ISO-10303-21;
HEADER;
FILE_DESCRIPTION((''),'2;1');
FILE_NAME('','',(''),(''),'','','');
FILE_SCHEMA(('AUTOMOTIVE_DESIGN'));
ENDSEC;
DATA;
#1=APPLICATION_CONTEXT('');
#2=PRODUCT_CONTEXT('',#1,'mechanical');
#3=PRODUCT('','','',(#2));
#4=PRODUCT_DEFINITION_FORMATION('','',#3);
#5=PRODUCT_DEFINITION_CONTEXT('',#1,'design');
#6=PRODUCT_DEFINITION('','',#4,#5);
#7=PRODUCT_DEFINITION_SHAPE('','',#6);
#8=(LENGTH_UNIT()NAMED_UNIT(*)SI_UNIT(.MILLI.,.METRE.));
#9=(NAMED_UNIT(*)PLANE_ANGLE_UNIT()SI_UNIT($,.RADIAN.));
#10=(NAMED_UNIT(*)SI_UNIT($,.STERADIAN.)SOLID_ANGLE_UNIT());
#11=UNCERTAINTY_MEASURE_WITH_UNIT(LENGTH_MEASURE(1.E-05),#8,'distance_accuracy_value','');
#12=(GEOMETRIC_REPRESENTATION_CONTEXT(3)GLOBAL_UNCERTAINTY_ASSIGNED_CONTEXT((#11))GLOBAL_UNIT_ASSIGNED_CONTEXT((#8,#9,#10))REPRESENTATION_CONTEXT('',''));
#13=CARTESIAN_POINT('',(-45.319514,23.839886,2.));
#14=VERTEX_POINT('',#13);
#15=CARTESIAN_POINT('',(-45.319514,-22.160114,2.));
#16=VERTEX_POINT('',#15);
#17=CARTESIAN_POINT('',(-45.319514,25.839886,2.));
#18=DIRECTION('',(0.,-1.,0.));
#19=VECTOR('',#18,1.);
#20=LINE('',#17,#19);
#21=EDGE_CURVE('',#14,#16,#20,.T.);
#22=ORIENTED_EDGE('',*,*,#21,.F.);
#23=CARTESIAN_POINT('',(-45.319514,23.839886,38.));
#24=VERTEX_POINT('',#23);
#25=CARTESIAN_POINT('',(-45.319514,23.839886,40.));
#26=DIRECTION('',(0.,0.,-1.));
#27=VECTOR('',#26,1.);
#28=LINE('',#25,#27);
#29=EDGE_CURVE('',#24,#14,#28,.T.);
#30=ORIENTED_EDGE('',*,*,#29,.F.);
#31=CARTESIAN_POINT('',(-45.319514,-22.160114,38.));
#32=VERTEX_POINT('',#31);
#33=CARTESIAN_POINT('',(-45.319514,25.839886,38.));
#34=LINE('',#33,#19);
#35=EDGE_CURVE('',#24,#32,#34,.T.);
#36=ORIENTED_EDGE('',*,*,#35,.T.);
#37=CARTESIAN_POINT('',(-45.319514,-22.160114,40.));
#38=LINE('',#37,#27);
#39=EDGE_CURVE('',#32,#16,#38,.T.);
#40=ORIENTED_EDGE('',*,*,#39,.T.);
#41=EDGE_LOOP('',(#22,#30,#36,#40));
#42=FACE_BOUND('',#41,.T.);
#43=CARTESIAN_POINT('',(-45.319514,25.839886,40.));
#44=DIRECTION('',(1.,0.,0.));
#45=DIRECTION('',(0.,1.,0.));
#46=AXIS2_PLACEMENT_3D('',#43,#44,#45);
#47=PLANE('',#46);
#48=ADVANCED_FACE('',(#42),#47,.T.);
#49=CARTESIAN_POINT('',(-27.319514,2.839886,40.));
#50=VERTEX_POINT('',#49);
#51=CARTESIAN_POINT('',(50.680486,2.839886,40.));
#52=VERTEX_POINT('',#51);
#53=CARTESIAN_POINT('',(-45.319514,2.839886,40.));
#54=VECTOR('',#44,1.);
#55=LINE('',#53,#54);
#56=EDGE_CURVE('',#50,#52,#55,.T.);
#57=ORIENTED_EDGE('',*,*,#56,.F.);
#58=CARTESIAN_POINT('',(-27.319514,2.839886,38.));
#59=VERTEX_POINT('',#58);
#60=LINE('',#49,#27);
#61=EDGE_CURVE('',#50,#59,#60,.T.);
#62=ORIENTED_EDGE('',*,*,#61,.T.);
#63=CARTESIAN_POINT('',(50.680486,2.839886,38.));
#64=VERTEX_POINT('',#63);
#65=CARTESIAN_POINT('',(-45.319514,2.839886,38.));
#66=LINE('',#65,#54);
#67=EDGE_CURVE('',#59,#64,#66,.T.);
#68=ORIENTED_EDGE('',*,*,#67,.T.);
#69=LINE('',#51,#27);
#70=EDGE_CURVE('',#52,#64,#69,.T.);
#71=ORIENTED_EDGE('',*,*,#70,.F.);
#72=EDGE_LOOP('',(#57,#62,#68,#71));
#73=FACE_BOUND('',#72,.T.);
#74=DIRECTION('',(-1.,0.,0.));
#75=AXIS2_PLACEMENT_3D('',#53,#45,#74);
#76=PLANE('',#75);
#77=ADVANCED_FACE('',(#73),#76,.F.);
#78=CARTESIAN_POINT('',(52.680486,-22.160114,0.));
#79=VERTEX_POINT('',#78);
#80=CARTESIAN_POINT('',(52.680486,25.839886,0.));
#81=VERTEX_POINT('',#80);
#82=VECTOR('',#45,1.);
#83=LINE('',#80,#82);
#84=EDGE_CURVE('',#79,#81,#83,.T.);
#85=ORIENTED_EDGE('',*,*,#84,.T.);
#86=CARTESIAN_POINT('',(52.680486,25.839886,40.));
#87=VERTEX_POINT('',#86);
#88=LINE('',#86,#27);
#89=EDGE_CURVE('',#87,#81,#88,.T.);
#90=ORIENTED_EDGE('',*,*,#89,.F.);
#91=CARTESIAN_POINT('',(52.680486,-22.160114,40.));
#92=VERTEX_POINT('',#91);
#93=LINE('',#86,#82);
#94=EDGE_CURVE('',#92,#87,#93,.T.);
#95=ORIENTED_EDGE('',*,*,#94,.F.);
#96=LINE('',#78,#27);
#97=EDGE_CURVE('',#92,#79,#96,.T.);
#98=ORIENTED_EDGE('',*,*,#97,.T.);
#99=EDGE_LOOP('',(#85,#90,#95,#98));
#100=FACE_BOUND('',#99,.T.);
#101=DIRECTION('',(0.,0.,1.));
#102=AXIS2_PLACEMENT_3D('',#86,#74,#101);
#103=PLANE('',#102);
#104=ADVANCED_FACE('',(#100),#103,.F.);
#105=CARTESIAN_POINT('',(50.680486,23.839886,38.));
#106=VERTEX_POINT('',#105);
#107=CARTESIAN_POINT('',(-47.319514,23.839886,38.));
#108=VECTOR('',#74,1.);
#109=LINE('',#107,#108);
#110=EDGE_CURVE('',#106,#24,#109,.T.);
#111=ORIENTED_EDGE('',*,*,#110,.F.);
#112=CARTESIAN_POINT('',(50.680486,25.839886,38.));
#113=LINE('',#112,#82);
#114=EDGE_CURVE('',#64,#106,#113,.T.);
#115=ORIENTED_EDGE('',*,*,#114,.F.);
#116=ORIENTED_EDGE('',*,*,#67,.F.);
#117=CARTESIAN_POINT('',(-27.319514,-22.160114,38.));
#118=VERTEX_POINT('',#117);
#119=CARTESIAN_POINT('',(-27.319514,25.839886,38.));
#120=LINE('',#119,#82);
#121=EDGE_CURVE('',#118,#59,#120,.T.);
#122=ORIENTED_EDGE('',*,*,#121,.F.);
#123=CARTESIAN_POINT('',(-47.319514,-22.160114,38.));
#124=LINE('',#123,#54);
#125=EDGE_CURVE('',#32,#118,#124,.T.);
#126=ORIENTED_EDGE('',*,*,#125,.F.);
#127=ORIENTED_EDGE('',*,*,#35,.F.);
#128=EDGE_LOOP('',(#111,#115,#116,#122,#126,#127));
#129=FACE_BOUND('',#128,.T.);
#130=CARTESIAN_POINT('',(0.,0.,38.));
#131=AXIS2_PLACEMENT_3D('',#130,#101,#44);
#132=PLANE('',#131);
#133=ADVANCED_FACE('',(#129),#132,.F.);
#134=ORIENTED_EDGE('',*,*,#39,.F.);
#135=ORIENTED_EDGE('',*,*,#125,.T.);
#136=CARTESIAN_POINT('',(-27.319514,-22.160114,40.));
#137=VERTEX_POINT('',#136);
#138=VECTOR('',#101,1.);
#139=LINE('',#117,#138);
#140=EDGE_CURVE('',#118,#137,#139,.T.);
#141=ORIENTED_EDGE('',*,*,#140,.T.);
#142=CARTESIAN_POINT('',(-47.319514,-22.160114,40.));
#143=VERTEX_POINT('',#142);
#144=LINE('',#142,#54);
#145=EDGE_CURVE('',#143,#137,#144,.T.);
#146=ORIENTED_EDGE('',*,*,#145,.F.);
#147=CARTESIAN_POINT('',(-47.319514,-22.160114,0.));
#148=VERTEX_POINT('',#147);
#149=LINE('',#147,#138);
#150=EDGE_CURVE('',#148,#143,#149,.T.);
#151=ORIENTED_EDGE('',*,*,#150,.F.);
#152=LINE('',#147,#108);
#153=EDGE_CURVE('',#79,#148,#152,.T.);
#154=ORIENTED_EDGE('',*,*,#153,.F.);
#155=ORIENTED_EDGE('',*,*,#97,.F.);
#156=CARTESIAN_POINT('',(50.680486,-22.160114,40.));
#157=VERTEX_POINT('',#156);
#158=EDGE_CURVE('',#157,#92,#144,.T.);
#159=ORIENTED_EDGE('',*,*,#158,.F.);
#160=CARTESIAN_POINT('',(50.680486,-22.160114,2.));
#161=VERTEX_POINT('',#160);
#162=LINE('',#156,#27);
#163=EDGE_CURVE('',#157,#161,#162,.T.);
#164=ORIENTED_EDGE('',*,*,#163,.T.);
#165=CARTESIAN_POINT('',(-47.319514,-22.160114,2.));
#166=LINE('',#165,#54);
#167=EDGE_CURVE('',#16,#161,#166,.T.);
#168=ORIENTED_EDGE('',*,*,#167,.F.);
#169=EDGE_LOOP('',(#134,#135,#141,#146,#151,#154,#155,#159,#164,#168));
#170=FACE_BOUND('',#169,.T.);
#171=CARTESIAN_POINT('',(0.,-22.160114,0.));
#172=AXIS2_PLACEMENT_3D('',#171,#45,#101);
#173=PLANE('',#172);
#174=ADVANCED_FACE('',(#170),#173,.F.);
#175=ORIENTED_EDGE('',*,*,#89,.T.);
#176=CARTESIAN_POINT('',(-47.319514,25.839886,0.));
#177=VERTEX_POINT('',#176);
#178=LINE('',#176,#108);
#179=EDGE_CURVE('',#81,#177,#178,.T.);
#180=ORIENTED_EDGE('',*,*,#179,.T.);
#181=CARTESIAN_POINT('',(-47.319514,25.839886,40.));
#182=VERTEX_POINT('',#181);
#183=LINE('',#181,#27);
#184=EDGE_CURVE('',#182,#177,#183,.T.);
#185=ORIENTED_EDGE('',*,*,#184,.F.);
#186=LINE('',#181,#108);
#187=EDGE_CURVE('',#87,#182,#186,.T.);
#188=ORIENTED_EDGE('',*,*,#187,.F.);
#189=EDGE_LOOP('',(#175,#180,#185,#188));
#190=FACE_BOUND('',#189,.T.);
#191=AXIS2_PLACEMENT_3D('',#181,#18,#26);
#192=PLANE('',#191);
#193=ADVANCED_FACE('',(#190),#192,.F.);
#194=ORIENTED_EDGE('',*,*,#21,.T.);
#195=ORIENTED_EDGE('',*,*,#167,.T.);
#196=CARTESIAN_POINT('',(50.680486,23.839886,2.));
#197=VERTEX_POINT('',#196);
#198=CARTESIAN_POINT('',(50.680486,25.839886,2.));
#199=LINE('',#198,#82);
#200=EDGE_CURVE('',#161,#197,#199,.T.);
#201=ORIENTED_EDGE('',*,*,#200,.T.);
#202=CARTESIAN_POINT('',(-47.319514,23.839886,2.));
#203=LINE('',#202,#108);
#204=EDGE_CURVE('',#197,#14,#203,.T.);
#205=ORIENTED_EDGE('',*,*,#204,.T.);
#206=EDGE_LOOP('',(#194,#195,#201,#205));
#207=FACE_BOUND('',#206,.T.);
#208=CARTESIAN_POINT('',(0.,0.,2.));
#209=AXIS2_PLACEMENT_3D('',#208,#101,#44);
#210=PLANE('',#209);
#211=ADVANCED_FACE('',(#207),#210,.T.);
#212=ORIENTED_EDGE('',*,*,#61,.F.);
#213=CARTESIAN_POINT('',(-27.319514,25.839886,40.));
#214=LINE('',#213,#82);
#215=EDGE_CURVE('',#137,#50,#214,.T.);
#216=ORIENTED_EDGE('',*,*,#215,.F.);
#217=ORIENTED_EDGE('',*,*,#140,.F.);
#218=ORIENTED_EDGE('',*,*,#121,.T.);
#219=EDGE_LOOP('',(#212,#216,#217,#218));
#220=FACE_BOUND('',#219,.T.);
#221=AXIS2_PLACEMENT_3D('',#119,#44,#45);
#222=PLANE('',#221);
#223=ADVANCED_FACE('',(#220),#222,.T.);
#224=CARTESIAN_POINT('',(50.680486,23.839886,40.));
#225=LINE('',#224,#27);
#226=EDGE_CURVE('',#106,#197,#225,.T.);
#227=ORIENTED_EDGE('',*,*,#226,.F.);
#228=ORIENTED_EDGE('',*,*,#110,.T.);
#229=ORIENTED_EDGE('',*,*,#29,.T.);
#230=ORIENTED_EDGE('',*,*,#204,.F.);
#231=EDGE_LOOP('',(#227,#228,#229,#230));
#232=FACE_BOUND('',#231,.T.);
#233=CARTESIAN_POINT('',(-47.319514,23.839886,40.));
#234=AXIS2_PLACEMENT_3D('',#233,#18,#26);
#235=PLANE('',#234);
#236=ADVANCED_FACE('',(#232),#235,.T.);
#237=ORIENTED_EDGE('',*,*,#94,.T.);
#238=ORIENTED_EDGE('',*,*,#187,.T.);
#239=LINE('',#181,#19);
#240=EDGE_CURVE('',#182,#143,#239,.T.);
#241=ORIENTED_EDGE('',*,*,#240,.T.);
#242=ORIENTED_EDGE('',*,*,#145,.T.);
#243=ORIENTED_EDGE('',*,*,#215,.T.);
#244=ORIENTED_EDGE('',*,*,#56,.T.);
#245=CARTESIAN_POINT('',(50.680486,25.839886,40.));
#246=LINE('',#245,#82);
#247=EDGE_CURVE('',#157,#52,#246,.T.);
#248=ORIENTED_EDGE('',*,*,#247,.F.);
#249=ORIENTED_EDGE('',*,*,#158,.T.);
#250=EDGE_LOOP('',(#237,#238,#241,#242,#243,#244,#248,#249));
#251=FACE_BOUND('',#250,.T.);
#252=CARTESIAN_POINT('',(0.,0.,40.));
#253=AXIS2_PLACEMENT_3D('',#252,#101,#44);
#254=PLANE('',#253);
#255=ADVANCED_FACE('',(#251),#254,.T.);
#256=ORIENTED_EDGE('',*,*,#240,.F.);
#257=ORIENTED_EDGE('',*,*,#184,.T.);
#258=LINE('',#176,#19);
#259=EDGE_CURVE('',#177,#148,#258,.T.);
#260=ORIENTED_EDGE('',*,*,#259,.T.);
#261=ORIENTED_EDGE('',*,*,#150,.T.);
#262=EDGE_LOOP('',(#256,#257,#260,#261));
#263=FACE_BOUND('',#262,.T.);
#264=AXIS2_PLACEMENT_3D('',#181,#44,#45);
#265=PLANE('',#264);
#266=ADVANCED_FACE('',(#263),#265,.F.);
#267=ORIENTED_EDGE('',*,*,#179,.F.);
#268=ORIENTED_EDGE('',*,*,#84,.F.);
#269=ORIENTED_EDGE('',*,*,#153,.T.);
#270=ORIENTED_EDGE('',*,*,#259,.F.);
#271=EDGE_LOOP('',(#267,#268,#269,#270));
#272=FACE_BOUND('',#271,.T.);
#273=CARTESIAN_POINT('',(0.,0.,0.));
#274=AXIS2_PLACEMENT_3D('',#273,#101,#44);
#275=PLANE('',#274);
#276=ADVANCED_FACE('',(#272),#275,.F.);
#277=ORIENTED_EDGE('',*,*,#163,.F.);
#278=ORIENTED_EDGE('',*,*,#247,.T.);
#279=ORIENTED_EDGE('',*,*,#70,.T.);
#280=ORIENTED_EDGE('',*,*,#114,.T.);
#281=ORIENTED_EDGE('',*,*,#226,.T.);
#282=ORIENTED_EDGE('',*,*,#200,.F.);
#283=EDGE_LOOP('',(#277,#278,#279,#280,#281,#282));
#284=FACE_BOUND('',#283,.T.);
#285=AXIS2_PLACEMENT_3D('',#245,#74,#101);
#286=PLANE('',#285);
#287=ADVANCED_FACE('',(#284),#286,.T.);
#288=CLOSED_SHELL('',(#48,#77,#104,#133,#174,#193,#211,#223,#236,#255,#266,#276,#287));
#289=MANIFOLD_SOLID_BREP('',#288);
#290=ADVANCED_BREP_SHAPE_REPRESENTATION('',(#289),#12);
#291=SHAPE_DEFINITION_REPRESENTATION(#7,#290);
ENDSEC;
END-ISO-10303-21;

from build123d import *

# Parameters (mm, degrees)
SKETCH1_W           = 100
SKETCH1_H           = 50
BOSS_EXTRUDE1_DEPTH = 40
SHELL1_T            = -2
SKETCH2_W           = 100
SKETCH2_H           = 40
CUT_EXTRUDE1_DEPTH  = 40
SKETCH3_W           = 96
SKETCH3_H           = 21
BOSS_EXTRUDE2_DEPTH = 38
SKETCH4_W           = 20
SKETCH4_H           = 48
BOSS_EXTRUDE3_DEPTH = 2
SHELL2_START        = -45.319513939
SHELL2_OUTLINE_W    = 21
SHELL2_OUTLINE_H    = 36
SHELL2_DEPTH        = 96


# Read off the part's stored shape, not the designer's step: Shell2
with BuildPart() as part:
    # Sketch1 → Boss-Extrude1 (new body)
    with BuildSketch(Plane.XY):
        with Locations((2.680486061, 0.839885633)):
            Rectangle(SKETCH1_W, SKETCH1_H)
    extrude(amount=BOSS_EXTRUDE1_DEPTH)

    # Shell1
    shell1_openings = [part.faces().sort_by_distance(p)[0] for p in [
        (2.680486061, 0.839885633, 40),
    ]]
    offset(amount=SHELL1_T, openings=shell1_openings, kind=Kind.INTERSECTION)

    # Sketch2 → Cut-Extrude1 (cut)
    with BuildSketch(Plane(origin=(0, -22.160114367, 0), x_dir=(1, 0, 0), z_dir=(0, 1, 0))):
        with Locations((2.680486061, -20)):
            Rectangle(SKETCH2_W, SKETCH2_H)
    extrude(amount=-CUT_EXTRUDE1_DEPTH, mode=Mode.SUBTRACT)

    # Sketch3 → Boss-Extrude2 (add)
    with BuildSketch(Plane.XY.offset(2)):
        with Locations((2.680486061, 13.339885633)):
            Rectangle(SKETCH3_W, SKETCH3_H)
    extrude(amount=BOSS_EXTRUDE2_DEPTH)

    # Sketch4 → Boss-Extrude3 (add)
    with BuildSketch(Plane.XY.offset(40)):
        with Locations((-37.319513939, 1.839885633)):
            Rectangle(SKETCH4_W, SKETCH4_H)
    extrude(amount=-BOSS_EXTRUDE3_DEPTH)

    # Shell2 outline → Shell2 (cut)
    with BuildSketch(Plane.YZ.offset(SHELL2_START)):
        with Locations((13.339885633, 20)):
            Rectangle(SHELL2_OUTLINE_W, SHELL2_OUTLINE_H)
    extrude(amount=SHELL2_DEPTH, mode=Mode.SUBTRACT)


solid = part.part
